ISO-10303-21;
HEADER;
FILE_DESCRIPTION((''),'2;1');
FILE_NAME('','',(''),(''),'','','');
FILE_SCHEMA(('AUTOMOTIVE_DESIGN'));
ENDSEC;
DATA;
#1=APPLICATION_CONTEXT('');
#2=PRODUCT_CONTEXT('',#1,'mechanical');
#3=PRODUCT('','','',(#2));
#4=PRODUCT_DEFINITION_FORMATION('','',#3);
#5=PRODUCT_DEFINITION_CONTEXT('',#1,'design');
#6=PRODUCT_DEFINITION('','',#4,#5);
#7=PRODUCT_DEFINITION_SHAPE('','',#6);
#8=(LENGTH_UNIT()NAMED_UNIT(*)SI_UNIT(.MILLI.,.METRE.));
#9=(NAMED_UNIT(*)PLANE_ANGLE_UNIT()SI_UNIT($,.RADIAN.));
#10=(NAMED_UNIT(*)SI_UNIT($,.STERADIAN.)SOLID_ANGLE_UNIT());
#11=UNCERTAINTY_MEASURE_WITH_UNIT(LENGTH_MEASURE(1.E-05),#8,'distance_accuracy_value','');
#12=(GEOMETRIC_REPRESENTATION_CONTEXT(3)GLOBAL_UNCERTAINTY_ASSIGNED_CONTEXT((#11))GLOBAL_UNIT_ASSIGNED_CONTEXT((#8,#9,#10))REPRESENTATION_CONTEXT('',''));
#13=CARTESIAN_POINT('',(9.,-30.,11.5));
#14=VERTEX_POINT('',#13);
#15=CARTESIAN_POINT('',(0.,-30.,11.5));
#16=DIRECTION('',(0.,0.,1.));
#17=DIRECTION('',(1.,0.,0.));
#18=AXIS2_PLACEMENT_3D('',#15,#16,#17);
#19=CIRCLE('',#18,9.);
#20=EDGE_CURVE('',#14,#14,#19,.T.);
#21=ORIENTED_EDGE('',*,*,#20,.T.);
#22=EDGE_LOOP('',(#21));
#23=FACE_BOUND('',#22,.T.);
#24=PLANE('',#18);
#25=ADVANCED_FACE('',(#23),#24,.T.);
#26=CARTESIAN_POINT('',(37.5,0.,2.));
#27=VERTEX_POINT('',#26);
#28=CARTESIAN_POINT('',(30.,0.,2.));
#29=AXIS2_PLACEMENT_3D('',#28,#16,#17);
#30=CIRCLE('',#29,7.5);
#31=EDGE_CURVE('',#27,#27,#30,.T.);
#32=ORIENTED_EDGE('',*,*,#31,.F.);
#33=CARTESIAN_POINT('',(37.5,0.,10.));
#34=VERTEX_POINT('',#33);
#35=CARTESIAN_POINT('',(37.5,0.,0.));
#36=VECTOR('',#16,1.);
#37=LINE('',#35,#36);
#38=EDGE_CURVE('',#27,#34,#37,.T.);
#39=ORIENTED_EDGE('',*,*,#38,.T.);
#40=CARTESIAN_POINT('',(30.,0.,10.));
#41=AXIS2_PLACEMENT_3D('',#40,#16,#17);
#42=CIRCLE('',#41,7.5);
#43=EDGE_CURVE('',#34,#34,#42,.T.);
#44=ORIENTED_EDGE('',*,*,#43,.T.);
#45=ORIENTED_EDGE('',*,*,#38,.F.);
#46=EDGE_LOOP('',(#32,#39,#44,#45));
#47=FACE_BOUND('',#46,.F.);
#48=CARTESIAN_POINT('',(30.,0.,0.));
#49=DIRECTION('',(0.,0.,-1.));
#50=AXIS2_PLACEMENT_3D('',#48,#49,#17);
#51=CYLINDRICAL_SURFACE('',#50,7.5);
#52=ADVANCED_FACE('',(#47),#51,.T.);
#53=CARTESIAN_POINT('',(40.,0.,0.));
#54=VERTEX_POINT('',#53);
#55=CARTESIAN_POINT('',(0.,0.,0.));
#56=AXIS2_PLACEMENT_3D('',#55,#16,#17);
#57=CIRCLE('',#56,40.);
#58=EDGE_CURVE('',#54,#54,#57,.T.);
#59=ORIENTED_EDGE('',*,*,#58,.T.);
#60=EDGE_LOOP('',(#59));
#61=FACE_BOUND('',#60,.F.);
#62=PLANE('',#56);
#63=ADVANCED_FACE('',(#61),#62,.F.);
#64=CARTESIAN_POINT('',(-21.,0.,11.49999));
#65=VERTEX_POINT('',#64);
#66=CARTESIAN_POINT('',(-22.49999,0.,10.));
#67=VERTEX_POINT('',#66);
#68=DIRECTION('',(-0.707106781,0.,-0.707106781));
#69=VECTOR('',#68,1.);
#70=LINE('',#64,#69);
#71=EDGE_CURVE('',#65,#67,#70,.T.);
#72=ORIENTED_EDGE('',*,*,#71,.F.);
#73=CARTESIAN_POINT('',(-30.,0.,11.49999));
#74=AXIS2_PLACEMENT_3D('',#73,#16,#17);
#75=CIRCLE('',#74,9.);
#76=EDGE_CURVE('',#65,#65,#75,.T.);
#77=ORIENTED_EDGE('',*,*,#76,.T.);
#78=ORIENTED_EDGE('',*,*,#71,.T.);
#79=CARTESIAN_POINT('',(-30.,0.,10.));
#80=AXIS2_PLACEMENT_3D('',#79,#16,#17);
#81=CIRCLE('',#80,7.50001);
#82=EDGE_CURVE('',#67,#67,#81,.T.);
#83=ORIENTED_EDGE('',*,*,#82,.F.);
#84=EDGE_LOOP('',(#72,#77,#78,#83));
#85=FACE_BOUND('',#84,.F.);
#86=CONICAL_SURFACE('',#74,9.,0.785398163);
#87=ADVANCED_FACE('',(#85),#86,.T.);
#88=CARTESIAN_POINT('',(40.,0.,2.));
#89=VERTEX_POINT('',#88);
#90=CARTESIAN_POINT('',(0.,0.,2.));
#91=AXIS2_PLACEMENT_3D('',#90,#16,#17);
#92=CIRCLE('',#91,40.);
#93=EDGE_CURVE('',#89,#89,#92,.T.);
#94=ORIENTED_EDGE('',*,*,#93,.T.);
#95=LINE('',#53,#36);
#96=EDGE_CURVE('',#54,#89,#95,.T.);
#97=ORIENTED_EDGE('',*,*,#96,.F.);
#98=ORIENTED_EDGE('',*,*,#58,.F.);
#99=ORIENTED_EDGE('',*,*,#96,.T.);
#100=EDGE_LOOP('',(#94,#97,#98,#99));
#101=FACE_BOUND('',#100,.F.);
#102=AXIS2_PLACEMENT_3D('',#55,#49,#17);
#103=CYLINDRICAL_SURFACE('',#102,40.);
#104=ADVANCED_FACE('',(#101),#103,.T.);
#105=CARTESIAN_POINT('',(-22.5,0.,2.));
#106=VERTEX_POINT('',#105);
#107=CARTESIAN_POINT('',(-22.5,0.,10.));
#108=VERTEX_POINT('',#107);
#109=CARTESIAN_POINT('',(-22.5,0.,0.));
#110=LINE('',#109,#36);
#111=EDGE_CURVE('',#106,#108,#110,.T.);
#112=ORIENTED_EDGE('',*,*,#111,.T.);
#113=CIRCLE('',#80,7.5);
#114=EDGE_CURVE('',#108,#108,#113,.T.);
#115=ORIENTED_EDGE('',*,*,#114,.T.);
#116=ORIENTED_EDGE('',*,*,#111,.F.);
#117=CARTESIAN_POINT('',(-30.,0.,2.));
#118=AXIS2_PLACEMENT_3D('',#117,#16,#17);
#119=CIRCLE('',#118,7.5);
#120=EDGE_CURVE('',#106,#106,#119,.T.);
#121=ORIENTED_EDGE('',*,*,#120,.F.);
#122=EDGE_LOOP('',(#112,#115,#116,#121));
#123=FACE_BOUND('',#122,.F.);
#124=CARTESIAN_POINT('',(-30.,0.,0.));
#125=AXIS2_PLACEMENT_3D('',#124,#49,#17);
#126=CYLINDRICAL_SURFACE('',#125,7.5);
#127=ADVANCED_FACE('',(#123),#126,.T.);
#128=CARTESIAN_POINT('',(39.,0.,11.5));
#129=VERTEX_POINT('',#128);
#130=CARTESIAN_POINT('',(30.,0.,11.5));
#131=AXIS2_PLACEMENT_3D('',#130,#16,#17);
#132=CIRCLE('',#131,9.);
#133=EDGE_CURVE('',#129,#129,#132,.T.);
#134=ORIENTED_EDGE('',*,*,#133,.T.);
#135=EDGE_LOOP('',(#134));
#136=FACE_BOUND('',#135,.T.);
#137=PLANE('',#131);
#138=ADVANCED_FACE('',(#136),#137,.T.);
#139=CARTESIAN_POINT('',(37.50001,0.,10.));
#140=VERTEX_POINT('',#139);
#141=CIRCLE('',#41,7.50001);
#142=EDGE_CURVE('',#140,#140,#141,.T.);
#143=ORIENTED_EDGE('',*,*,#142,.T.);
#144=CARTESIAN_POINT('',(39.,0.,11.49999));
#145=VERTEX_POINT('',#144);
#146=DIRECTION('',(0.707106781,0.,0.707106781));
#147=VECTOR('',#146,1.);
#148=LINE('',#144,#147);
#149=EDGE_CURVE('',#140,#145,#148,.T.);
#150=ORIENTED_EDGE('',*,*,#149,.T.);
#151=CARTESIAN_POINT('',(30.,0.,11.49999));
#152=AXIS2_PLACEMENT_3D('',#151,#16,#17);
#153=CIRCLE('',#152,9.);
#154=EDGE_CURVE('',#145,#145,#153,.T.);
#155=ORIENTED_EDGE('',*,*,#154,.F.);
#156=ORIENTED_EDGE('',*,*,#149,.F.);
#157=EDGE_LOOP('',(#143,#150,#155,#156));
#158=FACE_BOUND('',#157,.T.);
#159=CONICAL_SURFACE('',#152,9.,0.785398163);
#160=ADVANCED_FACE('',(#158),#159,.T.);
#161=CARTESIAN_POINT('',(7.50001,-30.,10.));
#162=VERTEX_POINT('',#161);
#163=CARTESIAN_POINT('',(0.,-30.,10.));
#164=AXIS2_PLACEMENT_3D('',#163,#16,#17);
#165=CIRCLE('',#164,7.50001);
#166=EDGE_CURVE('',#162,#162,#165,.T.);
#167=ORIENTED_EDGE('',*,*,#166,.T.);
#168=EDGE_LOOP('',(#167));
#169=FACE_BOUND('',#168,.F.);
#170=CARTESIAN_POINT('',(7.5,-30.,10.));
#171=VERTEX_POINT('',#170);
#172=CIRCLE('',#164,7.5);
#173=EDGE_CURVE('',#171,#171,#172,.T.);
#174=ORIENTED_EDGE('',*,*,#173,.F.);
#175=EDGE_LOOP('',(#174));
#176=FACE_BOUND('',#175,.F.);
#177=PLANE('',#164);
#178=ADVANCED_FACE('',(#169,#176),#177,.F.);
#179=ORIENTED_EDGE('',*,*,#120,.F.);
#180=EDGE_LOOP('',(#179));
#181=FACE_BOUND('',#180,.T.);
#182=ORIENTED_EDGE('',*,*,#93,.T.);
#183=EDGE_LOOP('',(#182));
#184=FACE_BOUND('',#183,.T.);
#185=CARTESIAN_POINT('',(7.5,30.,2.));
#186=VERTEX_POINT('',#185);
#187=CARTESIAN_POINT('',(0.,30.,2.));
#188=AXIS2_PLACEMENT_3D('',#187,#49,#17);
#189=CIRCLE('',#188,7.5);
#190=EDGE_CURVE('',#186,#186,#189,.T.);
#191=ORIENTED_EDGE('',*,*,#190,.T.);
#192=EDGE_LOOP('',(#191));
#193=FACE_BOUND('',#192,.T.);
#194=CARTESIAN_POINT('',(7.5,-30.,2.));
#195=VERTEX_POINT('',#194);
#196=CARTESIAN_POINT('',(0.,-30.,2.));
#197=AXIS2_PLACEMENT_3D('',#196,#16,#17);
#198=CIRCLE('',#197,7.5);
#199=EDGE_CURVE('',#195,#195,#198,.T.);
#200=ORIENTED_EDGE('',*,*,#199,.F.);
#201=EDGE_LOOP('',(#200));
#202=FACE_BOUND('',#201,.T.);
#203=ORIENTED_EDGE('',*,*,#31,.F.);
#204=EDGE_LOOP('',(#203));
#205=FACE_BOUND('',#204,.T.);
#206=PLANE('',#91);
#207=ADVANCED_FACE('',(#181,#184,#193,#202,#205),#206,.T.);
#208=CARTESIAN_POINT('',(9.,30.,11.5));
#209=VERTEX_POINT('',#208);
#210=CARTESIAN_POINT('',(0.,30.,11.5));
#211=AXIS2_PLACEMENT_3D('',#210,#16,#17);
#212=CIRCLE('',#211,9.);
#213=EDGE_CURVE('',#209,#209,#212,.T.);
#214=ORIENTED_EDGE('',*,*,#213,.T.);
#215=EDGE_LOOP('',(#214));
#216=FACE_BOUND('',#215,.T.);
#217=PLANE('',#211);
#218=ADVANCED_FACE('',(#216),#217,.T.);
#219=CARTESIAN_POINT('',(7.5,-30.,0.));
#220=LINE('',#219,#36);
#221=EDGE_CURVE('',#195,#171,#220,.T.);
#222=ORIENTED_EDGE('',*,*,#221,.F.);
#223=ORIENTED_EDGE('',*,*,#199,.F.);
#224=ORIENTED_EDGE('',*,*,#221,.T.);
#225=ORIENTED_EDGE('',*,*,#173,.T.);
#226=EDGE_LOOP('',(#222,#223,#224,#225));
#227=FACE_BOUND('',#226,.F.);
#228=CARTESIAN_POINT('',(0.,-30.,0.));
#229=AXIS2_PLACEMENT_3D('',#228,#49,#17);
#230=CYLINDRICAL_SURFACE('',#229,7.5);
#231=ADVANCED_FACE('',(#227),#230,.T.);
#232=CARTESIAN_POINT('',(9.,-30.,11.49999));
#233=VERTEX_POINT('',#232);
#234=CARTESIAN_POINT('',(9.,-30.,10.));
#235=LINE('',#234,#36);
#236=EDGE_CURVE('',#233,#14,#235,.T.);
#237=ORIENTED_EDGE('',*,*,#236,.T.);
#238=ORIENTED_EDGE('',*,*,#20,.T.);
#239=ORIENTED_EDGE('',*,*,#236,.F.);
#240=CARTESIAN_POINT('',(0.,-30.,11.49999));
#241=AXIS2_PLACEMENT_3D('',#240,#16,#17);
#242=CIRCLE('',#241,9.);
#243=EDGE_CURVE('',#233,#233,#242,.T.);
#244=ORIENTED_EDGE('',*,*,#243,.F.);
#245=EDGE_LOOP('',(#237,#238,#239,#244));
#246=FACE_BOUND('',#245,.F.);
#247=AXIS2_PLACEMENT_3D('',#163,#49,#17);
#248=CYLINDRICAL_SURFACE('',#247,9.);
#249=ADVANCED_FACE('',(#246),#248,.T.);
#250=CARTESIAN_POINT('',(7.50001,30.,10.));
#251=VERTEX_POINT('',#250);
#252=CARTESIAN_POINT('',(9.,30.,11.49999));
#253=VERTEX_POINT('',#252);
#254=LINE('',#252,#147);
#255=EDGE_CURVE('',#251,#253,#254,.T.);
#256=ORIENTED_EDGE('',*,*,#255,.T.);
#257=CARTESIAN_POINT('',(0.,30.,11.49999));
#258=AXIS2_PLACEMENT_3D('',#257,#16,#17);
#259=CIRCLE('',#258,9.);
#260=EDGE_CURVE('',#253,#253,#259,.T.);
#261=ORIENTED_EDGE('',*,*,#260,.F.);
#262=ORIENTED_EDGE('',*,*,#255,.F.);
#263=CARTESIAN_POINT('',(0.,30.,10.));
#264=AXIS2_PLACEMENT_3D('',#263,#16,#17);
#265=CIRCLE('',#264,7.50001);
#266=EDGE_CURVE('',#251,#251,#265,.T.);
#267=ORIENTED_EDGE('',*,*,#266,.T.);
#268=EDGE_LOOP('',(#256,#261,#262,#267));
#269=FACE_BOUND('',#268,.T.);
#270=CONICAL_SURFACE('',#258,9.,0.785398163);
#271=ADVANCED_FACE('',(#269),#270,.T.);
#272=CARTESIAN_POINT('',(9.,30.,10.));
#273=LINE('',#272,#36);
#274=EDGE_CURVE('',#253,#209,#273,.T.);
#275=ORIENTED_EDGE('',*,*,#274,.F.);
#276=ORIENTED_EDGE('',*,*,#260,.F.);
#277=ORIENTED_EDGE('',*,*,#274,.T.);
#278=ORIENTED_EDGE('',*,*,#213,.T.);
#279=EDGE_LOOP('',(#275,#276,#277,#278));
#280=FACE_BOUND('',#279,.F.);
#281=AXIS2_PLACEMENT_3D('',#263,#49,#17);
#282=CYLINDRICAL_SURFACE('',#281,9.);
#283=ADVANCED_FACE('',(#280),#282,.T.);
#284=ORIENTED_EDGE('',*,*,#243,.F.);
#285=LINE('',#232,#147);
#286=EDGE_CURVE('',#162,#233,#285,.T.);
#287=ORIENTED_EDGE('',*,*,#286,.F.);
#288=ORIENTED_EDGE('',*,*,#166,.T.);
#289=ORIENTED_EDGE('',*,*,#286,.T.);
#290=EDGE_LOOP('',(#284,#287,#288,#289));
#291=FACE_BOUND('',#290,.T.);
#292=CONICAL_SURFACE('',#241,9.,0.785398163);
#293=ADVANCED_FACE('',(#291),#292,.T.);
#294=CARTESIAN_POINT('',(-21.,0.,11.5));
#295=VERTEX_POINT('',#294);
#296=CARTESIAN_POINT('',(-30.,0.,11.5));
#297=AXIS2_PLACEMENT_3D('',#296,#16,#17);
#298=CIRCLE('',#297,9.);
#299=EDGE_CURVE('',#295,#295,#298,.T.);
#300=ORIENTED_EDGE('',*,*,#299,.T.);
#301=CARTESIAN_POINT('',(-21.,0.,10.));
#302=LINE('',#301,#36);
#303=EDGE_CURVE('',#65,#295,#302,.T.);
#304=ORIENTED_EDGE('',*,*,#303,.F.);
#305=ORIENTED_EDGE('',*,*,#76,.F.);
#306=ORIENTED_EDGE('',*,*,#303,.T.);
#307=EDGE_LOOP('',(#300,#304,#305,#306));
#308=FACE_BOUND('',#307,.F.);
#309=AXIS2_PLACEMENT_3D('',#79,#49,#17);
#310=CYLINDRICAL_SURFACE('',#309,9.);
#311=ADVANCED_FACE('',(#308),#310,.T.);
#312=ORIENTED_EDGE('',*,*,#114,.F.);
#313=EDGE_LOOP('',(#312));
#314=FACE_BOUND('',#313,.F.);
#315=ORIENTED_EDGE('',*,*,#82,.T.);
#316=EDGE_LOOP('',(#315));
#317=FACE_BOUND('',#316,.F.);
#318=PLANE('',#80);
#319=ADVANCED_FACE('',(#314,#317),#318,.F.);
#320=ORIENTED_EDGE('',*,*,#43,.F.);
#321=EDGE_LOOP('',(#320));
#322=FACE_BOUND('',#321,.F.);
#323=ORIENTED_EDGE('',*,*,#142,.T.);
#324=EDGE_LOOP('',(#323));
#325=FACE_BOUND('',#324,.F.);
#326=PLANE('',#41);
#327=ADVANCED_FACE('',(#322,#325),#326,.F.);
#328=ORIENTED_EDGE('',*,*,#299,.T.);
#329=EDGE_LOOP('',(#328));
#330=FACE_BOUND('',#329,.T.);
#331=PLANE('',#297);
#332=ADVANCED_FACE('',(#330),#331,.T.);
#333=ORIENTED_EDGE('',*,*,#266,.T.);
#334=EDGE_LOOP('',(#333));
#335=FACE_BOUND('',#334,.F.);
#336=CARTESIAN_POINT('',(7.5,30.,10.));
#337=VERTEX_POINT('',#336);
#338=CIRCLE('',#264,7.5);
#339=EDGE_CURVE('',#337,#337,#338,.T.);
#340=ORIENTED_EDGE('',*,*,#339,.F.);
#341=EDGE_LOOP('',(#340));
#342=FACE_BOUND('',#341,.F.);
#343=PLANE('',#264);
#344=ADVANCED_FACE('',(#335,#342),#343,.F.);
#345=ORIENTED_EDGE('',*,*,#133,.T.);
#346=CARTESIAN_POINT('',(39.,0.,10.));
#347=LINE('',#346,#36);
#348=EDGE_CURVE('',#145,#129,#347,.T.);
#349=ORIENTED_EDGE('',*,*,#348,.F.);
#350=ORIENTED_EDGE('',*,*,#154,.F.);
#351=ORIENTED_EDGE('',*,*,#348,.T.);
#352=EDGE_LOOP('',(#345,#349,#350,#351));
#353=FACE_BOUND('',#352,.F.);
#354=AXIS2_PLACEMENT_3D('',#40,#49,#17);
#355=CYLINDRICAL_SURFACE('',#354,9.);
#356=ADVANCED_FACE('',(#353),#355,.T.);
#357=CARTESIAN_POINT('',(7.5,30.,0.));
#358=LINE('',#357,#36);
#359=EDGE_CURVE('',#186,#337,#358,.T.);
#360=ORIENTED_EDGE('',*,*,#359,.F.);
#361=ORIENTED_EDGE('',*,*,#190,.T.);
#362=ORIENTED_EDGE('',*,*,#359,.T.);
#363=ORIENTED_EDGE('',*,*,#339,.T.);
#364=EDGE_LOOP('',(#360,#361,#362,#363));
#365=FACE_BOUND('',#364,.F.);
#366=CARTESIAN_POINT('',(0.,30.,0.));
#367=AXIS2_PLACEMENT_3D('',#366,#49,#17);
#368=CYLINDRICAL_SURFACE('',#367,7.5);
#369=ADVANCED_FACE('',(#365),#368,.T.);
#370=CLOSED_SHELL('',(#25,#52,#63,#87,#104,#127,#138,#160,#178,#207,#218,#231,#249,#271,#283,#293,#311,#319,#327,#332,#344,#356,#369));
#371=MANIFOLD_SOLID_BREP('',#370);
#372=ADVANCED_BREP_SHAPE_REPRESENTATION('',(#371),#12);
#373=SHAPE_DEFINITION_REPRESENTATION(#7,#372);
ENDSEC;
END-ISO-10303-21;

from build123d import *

# Parameters (mm, degrees)
F0_R     = 40
F0_R_2   = 7.5
F1_DEPTH = 2
F2_DEPTH = 10
F3_R     = 9
F3_R_2   = 7.5
F4_DEPTH = 1.5
F5_SIZE  = 1.49999


# Not quite as in the source:
# - a fillet or chamfer is up to 0.001 mm smaller than in the source, because OpenCascade refuses the exact size


with BuildPart() as f1:
    # F0 (on Top) → F1 (new body)
    with BuildSketch(Plane.XY):
        Circle(F0_R)
        with Locations((0, -30)):
            Circle(F0_R_2, mode=Mode.SUBTRACT)
        with Locations((-30, 0)):
            Circle(F0_R_2, mode=Mode.SUBTRACT)
        with Locations((30, 0)):
            Circle(F0_R_2, mode=Mode.SUBTRACT)
        with BuildLine():
            ThreePointArc((0, 22.5), (-5.3033008589, 35.3033008589), (7.5, 30))
            ThreePointArc((7.5, 30), (5.3033008589, 24.6966991411), (0, 22.5))
        make_face(mode=Mode.SUBTRACT)
    extrude(amount=F1_DEPTH)

    # F0 (on Top) → F2 (join)
    with BuildSketch(Plane.XY):
        with Locations((0, -30)):
            Circle(F0_R_2)
        with Locations((30, 0)):
            Circle(F0_R_2)
        with BuildLine():
            ThreePointArc((0, 22.5), (5.3033008589, 24.6966991411), (7.5, 30))
            ThreePointArc((7.5, 30), (-5.3033008589, 35.3033008589), (0, 22.5))
        make_face()
        with Locations((-30, 0)):
            Circle(F0_R_2)
    extrude(amount=F2_DEPTH)

    # F3 (on face) → F4 (join)
    with BuildSketch(Plane.XY.offset(10)):
        with Locations((-30, 0)):
            Circle(F3_R)
        with Locations((0, -30)):
            Circle(F3_R)
        with Locations((0, -30)):
            Circle(F3_R_2, mode=Mode.SUBTRACT)
        with Locations((0, -30)):
            Circle(F3_R_2)
        with Locations((30, 0)):
            Circle(F3_R)
        with Locations((0, 30)):
            Circle(F3_R)
    extrude(amount=F4_DEPTH)

    # F5 (size 1.5 in the source; OpenCascade refuses exactly that, so slightly less here)
    f5_edges = [f1.edges().sort_by_distance(p)[0] for p in [
        (-9, 30, 10),
        (-39, 0, 10),
        (-9, -30, 10),
        (21, 0, 10),
    ]]
    chamfer(f5_edges, length=F5_SIZE)


solid = f1.part
